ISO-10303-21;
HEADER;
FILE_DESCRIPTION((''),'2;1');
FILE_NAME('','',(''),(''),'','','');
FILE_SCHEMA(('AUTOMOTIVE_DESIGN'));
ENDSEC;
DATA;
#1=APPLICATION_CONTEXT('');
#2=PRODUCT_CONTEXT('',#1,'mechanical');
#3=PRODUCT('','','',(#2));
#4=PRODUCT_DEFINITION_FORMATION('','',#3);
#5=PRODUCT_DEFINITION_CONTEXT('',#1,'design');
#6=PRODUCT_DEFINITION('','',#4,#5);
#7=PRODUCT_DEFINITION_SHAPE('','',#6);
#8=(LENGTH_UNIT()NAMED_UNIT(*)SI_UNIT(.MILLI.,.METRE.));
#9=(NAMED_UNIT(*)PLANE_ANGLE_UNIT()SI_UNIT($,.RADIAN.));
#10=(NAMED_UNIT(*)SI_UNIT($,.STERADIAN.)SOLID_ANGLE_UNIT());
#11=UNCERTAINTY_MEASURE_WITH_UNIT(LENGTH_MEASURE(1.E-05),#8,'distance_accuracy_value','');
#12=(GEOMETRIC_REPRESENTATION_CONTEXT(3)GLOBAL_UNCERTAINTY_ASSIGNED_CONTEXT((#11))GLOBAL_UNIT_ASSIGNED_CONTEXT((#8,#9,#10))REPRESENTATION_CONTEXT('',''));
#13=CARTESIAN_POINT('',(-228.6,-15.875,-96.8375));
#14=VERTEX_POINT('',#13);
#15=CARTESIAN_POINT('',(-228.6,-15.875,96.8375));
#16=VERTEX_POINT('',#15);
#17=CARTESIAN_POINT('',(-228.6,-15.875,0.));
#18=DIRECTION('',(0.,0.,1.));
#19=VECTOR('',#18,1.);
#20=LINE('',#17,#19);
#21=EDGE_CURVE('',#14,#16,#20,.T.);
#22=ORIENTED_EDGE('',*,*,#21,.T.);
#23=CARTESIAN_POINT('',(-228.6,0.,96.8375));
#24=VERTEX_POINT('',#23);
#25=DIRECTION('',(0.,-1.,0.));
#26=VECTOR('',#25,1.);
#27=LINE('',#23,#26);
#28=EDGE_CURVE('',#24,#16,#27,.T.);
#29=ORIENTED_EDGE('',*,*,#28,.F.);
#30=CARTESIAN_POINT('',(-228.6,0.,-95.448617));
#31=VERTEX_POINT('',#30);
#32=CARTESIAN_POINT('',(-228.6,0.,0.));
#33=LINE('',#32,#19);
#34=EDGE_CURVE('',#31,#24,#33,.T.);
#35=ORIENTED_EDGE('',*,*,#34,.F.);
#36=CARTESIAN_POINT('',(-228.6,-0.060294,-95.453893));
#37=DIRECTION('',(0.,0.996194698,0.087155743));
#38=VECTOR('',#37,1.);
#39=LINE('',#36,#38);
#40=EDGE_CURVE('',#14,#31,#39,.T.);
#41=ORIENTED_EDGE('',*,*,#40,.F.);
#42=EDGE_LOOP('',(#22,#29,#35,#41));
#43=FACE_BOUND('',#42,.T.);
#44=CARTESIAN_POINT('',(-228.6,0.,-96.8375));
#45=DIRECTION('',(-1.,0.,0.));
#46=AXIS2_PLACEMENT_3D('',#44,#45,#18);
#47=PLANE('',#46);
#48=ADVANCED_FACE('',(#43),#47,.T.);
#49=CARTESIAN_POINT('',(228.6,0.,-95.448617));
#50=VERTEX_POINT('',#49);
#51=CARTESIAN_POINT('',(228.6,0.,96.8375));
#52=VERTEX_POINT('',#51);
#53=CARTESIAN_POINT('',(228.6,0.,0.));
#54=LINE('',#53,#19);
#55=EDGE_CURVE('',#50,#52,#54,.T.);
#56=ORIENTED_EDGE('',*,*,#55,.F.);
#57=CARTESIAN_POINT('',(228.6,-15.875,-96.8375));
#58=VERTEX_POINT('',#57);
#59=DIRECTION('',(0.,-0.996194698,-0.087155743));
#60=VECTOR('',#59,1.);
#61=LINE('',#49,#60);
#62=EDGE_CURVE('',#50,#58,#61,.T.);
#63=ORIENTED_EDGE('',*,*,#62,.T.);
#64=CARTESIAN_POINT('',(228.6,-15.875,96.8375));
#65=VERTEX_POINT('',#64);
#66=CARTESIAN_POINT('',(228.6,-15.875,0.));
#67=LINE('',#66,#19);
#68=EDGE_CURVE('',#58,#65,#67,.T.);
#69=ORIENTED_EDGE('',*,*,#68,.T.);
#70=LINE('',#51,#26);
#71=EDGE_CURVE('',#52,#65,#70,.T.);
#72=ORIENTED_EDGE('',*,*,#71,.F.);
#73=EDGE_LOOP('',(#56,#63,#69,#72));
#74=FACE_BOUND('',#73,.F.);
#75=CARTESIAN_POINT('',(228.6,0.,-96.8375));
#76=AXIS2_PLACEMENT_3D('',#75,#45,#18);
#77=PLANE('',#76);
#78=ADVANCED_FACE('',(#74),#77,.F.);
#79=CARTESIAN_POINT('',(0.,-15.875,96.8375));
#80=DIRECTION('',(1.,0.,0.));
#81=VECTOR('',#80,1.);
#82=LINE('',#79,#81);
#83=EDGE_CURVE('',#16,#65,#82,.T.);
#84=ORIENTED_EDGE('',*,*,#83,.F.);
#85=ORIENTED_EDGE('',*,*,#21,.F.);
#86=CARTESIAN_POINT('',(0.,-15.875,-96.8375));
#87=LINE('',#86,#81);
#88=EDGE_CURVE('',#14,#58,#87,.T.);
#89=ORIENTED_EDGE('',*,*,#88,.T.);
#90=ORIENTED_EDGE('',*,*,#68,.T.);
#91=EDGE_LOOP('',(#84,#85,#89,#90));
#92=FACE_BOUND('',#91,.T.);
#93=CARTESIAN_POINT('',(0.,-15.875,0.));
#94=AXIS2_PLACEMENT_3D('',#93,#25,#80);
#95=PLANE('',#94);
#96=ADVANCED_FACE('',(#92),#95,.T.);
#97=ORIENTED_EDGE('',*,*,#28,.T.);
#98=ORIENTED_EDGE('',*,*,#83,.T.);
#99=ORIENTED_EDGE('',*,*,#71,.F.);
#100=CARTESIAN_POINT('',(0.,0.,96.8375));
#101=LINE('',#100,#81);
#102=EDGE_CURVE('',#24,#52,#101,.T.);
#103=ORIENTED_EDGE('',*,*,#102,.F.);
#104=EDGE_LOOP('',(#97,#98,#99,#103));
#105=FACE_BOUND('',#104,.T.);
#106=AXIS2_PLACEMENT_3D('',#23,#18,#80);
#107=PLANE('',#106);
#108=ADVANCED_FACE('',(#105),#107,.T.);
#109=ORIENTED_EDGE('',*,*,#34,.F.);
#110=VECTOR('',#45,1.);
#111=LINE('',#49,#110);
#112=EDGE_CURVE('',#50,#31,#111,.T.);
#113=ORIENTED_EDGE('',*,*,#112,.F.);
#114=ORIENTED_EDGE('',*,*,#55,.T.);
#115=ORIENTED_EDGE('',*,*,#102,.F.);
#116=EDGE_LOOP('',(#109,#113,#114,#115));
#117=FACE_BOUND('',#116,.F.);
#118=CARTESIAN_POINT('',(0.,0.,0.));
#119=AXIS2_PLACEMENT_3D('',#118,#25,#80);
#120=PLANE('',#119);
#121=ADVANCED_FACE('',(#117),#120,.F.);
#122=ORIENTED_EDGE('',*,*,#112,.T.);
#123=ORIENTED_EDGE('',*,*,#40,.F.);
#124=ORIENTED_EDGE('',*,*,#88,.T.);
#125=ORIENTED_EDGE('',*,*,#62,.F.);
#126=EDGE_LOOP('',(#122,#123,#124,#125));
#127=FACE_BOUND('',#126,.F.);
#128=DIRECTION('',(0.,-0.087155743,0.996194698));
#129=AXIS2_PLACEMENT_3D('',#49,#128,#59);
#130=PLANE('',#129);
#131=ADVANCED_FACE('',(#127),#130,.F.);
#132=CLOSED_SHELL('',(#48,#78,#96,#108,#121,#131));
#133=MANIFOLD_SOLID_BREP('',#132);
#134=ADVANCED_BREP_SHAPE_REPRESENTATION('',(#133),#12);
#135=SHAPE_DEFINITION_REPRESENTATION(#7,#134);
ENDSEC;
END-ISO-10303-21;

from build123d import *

# Parameters (mm, degrees)
F0_W     = 457.2
F0_H     = 193.675
F1_DEPTH = 15.875
F3_DEPTH = 457.201


# Not quite as in the source:
# - a feature names something its author has since deleted; it is built from what else it names


with BuildPart() as f1:
    # F0 (on Front) → F1 (new body)
    with BuildSketch(Plane.XZ):
        Rectangle(F0_W, F0_H)
    extrude(amount=F1_DEPTH)

    # F2 (on face) → F3 (cut, through all)
    with BuildSketch(Plane.YZ.offset(228.6)):
        Polygon((0, -95.4486174665), (-15.875, -96.8375), (0, -96.8375), align=None)
    extrude(amount=-F3_DEPTH, mode=Mode.SUBTRACT)


solid = f1.part
